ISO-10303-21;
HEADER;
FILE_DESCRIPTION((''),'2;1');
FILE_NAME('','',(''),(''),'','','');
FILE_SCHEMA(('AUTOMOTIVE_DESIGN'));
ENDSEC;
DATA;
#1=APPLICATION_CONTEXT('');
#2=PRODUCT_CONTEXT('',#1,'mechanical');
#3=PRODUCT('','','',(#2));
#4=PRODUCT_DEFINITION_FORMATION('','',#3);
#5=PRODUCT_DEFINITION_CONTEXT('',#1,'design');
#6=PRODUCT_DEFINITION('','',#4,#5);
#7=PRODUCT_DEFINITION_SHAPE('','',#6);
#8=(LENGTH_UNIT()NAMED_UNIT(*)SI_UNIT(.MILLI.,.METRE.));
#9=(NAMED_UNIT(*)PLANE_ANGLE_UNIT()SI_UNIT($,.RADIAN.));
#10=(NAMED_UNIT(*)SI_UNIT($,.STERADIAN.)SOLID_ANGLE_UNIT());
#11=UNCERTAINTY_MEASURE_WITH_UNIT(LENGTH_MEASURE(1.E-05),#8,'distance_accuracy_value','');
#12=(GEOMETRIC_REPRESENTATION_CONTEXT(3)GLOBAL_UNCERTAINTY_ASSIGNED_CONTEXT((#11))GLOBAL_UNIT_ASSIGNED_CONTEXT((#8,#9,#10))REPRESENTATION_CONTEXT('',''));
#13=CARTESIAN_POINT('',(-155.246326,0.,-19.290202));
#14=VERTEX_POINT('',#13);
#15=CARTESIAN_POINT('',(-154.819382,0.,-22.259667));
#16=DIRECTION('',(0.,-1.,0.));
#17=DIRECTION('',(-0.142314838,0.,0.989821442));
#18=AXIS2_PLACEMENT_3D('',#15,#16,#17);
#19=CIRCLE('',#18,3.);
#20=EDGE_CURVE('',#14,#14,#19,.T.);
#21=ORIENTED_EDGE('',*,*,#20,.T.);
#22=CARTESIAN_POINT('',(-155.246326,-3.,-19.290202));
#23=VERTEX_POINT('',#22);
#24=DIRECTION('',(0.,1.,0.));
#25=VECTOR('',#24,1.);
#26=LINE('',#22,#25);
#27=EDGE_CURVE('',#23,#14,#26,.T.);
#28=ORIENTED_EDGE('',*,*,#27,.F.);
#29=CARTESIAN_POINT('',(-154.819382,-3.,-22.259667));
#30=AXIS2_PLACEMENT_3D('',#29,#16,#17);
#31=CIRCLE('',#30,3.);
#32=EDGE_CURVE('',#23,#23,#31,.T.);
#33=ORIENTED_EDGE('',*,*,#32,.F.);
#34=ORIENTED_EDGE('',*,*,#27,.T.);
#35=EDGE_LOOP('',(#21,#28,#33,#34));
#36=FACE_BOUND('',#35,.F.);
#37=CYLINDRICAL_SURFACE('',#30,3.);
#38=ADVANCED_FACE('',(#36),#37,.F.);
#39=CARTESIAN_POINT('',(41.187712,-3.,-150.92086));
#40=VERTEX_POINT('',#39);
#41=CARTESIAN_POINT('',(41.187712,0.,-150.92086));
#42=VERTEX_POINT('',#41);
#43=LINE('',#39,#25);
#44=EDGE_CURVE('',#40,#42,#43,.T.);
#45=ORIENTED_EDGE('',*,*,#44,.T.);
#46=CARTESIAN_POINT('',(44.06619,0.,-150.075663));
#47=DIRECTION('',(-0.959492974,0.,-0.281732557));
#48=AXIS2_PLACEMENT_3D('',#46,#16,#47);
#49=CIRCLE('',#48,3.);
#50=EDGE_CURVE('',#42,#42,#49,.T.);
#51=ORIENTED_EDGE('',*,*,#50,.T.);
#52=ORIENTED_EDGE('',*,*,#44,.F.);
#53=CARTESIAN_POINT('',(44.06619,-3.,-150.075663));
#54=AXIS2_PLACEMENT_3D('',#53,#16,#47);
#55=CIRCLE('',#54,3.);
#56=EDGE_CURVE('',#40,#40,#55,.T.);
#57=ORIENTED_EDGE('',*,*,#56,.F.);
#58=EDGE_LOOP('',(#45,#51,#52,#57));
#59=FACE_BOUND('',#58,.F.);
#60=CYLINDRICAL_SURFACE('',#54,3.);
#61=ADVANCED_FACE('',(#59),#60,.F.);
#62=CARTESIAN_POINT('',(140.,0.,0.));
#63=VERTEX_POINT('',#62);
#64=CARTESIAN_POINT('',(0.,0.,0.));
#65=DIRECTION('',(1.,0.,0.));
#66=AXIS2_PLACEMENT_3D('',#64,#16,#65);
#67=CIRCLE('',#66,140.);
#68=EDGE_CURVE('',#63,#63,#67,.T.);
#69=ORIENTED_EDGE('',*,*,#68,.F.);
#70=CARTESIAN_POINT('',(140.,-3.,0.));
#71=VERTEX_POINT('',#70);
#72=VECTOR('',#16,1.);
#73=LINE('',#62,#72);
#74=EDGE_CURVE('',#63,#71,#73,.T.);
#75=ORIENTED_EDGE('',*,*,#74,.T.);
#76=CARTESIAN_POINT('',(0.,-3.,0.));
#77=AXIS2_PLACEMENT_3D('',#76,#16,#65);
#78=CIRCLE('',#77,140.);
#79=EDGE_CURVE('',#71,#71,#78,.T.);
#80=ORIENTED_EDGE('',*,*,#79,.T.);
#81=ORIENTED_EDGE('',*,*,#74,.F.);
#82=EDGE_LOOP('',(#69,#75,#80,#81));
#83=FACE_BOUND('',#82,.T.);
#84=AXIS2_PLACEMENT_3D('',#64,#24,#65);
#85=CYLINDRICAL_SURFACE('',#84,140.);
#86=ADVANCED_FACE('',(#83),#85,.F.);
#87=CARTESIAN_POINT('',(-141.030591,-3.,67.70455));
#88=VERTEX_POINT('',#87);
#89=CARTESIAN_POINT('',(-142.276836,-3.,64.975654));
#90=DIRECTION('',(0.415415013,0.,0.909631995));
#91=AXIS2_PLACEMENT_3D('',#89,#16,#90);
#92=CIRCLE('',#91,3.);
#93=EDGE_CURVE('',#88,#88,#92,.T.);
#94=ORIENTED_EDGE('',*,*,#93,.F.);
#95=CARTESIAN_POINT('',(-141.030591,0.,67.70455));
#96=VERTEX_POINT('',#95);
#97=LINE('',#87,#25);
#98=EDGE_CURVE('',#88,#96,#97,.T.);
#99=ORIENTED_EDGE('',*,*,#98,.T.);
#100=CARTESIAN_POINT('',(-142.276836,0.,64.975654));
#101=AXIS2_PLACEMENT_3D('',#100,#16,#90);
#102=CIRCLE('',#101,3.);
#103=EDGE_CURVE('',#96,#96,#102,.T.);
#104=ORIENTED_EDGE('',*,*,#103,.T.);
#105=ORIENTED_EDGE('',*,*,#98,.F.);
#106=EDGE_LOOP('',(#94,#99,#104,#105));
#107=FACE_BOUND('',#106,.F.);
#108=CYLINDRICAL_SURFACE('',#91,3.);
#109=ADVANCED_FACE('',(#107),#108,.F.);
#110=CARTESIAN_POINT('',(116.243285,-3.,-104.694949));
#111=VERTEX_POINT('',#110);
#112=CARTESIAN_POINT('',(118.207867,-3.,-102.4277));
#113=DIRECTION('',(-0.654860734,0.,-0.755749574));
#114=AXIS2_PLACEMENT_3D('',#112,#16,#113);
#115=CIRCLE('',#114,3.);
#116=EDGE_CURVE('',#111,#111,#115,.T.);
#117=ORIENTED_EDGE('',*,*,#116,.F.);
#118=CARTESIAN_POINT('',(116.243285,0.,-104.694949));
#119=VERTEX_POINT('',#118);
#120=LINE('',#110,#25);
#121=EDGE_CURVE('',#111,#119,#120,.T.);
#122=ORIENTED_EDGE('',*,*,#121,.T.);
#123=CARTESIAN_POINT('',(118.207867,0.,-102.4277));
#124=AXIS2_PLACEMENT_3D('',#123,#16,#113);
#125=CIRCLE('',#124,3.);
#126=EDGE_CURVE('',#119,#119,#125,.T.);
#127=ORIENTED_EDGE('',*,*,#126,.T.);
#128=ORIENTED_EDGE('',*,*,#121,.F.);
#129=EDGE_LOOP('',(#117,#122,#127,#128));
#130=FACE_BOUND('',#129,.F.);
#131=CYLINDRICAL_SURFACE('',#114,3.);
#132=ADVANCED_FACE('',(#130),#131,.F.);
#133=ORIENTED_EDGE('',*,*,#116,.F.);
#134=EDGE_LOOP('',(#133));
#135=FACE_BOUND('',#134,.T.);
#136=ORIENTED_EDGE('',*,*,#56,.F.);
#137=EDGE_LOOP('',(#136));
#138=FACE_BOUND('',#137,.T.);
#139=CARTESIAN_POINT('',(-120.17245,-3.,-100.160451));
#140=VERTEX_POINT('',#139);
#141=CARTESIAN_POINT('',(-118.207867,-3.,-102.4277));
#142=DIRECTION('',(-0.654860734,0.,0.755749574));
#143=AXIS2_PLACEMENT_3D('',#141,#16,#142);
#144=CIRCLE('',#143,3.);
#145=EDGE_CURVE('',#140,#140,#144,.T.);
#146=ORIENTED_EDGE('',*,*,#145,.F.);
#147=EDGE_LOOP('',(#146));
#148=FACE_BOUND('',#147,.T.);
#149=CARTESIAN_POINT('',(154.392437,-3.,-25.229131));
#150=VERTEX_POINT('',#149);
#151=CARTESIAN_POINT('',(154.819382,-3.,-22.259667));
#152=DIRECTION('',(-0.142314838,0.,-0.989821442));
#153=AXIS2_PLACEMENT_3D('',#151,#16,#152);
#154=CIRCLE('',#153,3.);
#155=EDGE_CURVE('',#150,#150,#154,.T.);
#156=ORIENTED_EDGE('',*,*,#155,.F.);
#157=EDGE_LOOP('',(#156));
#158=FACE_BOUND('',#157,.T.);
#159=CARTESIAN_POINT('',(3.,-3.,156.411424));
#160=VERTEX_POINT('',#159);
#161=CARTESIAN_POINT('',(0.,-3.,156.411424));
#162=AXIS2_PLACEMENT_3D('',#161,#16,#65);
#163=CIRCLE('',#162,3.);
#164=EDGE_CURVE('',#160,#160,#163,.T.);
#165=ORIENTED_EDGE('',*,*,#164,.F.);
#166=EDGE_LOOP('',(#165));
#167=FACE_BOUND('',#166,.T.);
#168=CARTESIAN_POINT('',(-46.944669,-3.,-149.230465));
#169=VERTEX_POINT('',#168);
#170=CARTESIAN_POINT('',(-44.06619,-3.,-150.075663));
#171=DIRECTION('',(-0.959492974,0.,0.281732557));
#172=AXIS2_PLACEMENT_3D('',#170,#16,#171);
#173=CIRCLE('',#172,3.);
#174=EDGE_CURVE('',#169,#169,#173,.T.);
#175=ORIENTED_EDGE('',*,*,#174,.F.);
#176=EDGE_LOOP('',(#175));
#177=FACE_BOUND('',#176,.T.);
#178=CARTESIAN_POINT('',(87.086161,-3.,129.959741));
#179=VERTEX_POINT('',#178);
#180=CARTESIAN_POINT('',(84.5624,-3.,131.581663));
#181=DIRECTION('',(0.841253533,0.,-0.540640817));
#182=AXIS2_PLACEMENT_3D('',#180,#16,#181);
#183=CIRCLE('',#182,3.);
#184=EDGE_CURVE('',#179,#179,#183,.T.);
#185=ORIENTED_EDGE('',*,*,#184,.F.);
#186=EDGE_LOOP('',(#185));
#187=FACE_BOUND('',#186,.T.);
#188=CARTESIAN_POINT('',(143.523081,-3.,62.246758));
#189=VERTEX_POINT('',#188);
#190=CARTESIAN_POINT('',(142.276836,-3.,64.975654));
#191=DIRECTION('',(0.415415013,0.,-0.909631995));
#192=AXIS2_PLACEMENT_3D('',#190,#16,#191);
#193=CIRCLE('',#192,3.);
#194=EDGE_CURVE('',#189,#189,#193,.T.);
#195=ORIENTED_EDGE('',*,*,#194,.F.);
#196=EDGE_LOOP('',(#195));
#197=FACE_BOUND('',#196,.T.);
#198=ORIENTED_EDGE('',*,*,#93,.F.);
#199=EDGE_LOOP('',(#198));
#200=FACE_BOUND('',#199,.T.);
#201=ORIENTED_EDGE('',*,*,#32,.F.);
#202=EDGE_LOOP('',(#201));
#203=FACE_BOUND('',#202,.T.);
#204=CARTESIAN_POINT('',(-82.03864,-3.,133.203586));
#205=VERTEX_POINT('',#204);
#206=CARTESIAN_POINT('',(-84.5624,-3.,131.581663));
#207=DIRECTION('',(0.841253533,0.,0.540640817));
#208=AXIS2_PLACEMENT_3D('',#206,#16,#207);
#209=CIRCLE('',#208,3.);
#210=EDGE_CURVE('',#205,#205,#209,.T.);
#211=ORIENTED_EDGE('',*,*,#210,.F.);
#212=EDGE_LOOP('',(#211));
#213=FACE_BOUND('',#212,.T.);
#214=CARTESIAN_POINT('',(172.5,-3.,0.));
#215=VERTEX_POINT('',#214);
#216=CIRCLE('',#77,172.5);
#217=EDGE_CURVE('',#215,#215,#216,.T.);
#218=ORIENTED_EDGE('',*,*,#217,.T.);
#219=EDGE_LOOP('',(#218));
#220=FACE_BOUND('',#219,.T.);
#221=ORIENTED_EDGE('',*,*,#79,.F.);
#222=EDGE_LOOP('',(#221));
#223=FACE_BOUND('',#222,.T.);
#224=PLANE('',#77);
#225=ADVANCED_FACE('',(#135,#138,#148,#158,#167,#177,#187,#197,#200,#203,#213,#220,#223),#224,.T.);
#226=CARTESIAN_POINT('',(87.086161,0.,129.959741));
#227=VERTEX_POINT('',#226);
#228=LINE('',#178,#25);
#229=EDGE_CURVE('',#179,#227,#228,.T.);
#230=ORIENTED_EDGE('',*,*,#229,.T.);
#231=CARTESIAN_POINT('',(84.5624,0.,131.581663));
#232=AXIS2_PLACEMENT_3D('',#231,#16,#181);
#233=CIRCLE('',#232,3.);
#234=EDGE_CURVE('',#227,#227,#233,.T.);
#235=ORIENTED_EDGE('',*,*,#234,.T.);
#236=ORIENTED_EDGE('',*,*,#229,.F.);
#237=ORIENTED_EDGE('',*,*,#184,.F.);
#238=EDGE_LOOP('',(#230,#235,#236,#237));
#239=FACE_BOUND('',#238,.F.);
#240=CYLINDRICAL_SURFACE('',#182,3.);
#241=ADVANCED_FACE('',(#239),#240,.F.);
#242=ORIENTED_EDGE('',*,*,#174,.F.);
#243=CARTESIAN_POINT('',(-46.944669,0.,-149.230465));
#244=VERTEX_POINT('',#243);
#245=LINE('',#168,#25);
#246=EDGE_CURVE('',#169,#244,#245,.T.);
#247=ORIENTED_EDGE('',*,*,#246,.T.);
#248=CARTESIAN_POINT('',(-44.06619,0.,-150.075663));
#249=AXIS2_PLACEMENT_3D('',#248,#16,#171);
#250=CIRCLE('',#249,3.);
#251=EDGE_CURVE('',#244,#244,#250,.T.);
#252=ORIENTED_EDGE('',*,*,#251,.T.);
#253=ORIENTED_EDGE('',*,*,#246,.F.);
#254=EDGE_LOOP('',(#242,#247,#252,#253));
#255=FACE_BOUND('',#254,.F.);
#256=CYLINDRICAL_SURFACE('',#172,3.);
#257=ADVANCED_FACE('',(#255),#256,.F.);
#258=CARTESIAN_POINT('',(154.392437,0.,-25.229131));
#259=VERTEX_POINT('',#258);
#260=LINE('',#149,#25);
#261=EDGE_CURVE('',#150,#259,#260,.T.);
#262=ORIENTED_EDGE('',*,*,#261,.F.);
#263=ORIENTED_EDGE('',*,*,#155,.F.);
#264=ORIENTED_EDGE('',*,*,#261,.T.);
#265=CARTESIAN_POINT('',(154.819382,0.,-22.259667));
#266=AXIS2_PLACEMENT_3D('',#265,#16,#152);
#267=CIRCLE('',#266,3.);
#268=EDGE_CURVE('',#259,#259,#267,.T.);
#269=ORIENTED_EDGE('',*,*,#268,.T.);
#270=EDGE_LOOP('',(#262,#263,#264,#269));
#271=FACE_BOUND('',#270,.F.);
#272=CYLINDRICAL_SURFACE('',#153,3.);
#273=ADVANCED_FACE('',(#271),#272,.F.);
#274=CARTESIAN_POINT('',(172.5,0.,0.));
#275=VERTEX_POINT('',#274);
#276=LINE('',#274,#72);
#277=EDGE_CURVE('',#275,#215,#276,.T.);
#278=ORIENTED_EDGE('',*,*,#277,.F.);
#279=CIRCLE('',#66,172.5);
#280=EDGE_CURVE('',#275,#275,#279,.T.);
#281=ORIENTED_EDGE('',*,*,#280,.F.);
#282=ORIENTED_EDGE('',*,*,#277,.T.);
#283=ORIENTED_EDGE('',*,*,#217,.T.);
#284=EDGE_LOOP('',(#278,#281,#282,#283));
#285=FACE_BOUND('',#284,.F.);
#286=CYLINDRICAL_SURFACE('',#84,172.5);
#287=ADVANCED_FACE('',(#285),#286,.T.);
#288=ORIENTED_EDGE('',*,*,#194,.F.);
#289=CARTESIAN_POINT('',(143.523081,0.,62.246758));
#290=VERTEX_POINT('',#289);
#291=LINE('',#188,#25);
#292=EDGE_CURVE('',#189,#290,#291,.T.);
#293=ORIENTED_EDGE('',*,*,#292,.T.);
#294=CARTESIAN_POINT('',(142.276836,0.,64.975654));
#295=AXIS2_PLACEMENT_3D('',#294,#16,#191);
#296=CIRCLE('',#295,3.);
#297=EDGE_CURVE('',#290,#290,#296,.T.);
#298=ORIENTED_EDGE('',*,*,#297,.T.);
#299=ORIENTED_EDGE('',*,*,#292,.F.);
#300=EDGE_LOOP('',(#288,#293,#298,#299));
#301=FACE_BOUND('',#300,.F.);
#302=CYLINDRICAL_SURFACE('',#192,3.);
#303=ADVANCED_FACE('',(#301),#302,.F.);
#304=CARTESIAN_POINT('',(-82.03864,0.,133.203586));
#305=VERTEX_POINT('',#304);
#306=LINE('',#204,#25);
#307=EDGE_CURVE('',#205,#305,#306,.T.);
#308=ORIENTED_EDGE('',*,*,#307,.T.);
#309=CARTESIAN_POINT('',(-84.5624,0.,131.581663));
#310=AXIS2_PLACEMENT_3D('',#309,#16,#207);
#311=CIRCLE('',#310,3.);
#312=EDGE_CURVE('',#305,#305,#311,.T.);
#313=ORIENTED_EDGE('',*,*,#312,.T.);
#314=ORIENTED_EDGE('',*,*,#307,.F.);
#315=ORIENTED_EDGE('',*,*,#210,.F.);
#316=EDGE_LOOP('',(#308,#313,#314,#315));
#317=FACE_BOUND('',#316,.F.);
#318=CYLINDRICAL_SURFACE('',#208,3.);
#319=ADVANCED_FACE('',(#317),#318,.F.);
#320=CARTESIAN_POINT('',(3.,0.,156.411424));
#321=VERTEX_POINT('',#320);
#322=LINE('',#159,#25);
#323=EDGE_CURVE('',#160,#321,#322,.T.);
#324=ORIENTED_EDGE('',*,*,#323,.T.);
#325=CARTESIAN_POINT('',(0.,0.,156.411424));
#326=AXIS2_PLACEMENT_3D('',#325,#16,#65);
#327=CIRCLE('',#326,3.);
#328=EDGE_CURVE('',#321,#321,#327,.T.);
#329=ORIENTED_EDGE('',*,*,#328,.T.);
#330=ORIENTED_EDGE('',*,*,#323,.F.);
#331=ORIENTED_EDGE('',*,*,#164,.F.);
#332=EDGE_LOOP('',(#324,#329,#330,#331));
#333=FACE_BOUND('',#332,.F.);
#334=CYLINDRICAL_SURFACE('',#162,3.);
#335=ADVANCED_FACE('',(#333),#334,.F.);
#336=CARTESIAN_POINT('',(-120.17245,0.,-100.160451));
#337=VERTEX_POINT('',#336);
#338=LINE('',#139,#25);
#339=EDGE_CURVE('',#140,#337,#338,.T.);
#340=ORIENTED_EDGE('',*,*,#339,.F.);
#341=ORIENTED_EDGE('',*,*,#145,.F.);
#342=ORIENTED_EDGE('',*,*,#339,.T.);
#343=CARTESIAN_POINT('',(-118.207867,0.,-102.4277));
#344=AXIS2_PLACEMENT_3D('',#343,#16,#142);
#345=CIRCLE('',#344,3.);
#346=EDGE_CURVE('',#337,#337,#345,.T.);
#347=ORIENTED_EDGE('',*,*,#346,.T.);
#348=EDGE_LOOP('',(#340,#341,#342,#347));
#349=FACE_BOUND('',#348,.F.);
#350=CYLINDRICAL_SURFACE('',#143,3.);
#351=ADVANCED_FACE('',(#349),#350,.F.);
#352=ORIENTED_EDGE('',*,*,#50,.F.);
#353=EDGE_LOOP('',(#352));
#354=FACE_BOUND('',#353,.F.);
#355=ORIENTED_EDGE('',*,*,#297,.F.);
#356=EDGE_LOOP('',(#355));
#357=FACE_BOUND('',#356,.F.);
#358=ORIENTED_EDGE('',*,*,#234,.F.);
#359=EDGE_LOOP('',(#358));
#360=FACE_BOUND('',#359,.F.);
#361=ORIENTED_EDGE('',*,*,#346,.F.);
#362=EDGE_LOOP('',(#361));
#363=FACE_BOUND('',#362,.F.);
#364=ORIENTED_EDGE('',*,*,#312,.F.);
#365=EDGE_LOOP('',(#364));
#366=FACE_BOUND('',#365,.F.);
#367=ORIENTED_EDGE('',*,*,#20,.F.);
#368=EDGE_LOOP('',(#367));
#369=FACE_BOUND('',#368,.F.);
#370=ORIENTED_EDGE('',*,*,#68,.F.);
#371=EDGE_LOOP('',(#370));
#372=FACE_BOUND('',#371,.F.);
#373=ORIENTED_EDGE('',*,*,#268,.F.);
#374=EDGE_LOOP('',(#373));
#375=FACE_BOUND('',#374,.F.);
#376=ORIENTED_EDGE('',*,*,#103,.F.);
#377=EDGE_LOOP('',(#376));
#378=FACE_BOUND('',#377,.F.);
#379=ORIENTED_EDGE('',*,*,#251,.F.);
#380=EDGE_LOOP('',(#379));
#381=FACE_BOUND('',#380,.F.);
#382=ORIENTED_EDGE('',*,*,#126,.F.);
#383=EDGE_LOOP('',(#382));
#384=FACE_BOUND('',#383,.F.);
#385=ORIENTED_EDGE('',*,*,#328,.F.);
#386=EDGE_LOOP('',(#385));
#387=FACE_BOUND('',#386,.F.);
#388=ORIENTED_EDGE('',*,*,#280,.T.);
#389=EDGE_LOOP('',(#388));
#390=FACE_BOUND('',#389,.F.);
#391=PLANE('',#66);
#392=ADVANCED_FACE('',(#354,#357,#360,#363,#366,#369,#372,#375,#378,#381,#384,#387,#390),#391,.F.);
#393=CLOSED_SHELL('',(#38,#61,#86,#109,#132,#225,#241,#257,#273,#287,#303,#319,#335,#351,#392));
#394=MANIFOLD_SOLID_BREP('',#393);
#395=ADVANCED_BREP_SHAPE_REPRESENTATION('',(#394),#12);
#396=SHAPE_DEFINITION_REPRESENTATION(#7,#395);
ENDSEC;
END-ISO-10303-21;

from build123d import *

# Parameters (mm, degrees)
F0_R            = 172.5
F0_R_2          = 140
F1_DEPTH        = 3
F2_R            = 3
F3_DEPTH        = 25
F3_COPIES_COUNT = 11


# Not quite as in the source:
# - a pattern or mirror of a feature is missing from the dataset's text; its kind, count and spacing are read off the source's solid


with BuildPart() as f1:
    # F0 (on Front) → F1 (new body)
    with BuildSketch(Plane.XZ):
        Circle(F0_R)
        Circle(F0_R_2, mode=Mode.SUBTRACT)
    extrude(amount=F1_DEPTH)

    # F2 (on face) → F3 (cut)
    with BuildSketch(Plane.XZ.offset(3)):
        with Locations((0, 156.4114242792)):
            Circle(F2_R)
    f3 = extrude(amount=-F3_DEPTH, mode=Mode.SUBTRACT)

    # F3_copies: F3 ×11 about axis
    f3_copies_axis = Axis((0, 0, 0), (0, 1, 0))
    for i in range(1, F3_COPIES_COUNT):
        add(f3.rotate(f3_copies_axis, i * 360 / F3_COPIES_COUNT), mode=Mode.SUBTRACT)


solid = f1.part
